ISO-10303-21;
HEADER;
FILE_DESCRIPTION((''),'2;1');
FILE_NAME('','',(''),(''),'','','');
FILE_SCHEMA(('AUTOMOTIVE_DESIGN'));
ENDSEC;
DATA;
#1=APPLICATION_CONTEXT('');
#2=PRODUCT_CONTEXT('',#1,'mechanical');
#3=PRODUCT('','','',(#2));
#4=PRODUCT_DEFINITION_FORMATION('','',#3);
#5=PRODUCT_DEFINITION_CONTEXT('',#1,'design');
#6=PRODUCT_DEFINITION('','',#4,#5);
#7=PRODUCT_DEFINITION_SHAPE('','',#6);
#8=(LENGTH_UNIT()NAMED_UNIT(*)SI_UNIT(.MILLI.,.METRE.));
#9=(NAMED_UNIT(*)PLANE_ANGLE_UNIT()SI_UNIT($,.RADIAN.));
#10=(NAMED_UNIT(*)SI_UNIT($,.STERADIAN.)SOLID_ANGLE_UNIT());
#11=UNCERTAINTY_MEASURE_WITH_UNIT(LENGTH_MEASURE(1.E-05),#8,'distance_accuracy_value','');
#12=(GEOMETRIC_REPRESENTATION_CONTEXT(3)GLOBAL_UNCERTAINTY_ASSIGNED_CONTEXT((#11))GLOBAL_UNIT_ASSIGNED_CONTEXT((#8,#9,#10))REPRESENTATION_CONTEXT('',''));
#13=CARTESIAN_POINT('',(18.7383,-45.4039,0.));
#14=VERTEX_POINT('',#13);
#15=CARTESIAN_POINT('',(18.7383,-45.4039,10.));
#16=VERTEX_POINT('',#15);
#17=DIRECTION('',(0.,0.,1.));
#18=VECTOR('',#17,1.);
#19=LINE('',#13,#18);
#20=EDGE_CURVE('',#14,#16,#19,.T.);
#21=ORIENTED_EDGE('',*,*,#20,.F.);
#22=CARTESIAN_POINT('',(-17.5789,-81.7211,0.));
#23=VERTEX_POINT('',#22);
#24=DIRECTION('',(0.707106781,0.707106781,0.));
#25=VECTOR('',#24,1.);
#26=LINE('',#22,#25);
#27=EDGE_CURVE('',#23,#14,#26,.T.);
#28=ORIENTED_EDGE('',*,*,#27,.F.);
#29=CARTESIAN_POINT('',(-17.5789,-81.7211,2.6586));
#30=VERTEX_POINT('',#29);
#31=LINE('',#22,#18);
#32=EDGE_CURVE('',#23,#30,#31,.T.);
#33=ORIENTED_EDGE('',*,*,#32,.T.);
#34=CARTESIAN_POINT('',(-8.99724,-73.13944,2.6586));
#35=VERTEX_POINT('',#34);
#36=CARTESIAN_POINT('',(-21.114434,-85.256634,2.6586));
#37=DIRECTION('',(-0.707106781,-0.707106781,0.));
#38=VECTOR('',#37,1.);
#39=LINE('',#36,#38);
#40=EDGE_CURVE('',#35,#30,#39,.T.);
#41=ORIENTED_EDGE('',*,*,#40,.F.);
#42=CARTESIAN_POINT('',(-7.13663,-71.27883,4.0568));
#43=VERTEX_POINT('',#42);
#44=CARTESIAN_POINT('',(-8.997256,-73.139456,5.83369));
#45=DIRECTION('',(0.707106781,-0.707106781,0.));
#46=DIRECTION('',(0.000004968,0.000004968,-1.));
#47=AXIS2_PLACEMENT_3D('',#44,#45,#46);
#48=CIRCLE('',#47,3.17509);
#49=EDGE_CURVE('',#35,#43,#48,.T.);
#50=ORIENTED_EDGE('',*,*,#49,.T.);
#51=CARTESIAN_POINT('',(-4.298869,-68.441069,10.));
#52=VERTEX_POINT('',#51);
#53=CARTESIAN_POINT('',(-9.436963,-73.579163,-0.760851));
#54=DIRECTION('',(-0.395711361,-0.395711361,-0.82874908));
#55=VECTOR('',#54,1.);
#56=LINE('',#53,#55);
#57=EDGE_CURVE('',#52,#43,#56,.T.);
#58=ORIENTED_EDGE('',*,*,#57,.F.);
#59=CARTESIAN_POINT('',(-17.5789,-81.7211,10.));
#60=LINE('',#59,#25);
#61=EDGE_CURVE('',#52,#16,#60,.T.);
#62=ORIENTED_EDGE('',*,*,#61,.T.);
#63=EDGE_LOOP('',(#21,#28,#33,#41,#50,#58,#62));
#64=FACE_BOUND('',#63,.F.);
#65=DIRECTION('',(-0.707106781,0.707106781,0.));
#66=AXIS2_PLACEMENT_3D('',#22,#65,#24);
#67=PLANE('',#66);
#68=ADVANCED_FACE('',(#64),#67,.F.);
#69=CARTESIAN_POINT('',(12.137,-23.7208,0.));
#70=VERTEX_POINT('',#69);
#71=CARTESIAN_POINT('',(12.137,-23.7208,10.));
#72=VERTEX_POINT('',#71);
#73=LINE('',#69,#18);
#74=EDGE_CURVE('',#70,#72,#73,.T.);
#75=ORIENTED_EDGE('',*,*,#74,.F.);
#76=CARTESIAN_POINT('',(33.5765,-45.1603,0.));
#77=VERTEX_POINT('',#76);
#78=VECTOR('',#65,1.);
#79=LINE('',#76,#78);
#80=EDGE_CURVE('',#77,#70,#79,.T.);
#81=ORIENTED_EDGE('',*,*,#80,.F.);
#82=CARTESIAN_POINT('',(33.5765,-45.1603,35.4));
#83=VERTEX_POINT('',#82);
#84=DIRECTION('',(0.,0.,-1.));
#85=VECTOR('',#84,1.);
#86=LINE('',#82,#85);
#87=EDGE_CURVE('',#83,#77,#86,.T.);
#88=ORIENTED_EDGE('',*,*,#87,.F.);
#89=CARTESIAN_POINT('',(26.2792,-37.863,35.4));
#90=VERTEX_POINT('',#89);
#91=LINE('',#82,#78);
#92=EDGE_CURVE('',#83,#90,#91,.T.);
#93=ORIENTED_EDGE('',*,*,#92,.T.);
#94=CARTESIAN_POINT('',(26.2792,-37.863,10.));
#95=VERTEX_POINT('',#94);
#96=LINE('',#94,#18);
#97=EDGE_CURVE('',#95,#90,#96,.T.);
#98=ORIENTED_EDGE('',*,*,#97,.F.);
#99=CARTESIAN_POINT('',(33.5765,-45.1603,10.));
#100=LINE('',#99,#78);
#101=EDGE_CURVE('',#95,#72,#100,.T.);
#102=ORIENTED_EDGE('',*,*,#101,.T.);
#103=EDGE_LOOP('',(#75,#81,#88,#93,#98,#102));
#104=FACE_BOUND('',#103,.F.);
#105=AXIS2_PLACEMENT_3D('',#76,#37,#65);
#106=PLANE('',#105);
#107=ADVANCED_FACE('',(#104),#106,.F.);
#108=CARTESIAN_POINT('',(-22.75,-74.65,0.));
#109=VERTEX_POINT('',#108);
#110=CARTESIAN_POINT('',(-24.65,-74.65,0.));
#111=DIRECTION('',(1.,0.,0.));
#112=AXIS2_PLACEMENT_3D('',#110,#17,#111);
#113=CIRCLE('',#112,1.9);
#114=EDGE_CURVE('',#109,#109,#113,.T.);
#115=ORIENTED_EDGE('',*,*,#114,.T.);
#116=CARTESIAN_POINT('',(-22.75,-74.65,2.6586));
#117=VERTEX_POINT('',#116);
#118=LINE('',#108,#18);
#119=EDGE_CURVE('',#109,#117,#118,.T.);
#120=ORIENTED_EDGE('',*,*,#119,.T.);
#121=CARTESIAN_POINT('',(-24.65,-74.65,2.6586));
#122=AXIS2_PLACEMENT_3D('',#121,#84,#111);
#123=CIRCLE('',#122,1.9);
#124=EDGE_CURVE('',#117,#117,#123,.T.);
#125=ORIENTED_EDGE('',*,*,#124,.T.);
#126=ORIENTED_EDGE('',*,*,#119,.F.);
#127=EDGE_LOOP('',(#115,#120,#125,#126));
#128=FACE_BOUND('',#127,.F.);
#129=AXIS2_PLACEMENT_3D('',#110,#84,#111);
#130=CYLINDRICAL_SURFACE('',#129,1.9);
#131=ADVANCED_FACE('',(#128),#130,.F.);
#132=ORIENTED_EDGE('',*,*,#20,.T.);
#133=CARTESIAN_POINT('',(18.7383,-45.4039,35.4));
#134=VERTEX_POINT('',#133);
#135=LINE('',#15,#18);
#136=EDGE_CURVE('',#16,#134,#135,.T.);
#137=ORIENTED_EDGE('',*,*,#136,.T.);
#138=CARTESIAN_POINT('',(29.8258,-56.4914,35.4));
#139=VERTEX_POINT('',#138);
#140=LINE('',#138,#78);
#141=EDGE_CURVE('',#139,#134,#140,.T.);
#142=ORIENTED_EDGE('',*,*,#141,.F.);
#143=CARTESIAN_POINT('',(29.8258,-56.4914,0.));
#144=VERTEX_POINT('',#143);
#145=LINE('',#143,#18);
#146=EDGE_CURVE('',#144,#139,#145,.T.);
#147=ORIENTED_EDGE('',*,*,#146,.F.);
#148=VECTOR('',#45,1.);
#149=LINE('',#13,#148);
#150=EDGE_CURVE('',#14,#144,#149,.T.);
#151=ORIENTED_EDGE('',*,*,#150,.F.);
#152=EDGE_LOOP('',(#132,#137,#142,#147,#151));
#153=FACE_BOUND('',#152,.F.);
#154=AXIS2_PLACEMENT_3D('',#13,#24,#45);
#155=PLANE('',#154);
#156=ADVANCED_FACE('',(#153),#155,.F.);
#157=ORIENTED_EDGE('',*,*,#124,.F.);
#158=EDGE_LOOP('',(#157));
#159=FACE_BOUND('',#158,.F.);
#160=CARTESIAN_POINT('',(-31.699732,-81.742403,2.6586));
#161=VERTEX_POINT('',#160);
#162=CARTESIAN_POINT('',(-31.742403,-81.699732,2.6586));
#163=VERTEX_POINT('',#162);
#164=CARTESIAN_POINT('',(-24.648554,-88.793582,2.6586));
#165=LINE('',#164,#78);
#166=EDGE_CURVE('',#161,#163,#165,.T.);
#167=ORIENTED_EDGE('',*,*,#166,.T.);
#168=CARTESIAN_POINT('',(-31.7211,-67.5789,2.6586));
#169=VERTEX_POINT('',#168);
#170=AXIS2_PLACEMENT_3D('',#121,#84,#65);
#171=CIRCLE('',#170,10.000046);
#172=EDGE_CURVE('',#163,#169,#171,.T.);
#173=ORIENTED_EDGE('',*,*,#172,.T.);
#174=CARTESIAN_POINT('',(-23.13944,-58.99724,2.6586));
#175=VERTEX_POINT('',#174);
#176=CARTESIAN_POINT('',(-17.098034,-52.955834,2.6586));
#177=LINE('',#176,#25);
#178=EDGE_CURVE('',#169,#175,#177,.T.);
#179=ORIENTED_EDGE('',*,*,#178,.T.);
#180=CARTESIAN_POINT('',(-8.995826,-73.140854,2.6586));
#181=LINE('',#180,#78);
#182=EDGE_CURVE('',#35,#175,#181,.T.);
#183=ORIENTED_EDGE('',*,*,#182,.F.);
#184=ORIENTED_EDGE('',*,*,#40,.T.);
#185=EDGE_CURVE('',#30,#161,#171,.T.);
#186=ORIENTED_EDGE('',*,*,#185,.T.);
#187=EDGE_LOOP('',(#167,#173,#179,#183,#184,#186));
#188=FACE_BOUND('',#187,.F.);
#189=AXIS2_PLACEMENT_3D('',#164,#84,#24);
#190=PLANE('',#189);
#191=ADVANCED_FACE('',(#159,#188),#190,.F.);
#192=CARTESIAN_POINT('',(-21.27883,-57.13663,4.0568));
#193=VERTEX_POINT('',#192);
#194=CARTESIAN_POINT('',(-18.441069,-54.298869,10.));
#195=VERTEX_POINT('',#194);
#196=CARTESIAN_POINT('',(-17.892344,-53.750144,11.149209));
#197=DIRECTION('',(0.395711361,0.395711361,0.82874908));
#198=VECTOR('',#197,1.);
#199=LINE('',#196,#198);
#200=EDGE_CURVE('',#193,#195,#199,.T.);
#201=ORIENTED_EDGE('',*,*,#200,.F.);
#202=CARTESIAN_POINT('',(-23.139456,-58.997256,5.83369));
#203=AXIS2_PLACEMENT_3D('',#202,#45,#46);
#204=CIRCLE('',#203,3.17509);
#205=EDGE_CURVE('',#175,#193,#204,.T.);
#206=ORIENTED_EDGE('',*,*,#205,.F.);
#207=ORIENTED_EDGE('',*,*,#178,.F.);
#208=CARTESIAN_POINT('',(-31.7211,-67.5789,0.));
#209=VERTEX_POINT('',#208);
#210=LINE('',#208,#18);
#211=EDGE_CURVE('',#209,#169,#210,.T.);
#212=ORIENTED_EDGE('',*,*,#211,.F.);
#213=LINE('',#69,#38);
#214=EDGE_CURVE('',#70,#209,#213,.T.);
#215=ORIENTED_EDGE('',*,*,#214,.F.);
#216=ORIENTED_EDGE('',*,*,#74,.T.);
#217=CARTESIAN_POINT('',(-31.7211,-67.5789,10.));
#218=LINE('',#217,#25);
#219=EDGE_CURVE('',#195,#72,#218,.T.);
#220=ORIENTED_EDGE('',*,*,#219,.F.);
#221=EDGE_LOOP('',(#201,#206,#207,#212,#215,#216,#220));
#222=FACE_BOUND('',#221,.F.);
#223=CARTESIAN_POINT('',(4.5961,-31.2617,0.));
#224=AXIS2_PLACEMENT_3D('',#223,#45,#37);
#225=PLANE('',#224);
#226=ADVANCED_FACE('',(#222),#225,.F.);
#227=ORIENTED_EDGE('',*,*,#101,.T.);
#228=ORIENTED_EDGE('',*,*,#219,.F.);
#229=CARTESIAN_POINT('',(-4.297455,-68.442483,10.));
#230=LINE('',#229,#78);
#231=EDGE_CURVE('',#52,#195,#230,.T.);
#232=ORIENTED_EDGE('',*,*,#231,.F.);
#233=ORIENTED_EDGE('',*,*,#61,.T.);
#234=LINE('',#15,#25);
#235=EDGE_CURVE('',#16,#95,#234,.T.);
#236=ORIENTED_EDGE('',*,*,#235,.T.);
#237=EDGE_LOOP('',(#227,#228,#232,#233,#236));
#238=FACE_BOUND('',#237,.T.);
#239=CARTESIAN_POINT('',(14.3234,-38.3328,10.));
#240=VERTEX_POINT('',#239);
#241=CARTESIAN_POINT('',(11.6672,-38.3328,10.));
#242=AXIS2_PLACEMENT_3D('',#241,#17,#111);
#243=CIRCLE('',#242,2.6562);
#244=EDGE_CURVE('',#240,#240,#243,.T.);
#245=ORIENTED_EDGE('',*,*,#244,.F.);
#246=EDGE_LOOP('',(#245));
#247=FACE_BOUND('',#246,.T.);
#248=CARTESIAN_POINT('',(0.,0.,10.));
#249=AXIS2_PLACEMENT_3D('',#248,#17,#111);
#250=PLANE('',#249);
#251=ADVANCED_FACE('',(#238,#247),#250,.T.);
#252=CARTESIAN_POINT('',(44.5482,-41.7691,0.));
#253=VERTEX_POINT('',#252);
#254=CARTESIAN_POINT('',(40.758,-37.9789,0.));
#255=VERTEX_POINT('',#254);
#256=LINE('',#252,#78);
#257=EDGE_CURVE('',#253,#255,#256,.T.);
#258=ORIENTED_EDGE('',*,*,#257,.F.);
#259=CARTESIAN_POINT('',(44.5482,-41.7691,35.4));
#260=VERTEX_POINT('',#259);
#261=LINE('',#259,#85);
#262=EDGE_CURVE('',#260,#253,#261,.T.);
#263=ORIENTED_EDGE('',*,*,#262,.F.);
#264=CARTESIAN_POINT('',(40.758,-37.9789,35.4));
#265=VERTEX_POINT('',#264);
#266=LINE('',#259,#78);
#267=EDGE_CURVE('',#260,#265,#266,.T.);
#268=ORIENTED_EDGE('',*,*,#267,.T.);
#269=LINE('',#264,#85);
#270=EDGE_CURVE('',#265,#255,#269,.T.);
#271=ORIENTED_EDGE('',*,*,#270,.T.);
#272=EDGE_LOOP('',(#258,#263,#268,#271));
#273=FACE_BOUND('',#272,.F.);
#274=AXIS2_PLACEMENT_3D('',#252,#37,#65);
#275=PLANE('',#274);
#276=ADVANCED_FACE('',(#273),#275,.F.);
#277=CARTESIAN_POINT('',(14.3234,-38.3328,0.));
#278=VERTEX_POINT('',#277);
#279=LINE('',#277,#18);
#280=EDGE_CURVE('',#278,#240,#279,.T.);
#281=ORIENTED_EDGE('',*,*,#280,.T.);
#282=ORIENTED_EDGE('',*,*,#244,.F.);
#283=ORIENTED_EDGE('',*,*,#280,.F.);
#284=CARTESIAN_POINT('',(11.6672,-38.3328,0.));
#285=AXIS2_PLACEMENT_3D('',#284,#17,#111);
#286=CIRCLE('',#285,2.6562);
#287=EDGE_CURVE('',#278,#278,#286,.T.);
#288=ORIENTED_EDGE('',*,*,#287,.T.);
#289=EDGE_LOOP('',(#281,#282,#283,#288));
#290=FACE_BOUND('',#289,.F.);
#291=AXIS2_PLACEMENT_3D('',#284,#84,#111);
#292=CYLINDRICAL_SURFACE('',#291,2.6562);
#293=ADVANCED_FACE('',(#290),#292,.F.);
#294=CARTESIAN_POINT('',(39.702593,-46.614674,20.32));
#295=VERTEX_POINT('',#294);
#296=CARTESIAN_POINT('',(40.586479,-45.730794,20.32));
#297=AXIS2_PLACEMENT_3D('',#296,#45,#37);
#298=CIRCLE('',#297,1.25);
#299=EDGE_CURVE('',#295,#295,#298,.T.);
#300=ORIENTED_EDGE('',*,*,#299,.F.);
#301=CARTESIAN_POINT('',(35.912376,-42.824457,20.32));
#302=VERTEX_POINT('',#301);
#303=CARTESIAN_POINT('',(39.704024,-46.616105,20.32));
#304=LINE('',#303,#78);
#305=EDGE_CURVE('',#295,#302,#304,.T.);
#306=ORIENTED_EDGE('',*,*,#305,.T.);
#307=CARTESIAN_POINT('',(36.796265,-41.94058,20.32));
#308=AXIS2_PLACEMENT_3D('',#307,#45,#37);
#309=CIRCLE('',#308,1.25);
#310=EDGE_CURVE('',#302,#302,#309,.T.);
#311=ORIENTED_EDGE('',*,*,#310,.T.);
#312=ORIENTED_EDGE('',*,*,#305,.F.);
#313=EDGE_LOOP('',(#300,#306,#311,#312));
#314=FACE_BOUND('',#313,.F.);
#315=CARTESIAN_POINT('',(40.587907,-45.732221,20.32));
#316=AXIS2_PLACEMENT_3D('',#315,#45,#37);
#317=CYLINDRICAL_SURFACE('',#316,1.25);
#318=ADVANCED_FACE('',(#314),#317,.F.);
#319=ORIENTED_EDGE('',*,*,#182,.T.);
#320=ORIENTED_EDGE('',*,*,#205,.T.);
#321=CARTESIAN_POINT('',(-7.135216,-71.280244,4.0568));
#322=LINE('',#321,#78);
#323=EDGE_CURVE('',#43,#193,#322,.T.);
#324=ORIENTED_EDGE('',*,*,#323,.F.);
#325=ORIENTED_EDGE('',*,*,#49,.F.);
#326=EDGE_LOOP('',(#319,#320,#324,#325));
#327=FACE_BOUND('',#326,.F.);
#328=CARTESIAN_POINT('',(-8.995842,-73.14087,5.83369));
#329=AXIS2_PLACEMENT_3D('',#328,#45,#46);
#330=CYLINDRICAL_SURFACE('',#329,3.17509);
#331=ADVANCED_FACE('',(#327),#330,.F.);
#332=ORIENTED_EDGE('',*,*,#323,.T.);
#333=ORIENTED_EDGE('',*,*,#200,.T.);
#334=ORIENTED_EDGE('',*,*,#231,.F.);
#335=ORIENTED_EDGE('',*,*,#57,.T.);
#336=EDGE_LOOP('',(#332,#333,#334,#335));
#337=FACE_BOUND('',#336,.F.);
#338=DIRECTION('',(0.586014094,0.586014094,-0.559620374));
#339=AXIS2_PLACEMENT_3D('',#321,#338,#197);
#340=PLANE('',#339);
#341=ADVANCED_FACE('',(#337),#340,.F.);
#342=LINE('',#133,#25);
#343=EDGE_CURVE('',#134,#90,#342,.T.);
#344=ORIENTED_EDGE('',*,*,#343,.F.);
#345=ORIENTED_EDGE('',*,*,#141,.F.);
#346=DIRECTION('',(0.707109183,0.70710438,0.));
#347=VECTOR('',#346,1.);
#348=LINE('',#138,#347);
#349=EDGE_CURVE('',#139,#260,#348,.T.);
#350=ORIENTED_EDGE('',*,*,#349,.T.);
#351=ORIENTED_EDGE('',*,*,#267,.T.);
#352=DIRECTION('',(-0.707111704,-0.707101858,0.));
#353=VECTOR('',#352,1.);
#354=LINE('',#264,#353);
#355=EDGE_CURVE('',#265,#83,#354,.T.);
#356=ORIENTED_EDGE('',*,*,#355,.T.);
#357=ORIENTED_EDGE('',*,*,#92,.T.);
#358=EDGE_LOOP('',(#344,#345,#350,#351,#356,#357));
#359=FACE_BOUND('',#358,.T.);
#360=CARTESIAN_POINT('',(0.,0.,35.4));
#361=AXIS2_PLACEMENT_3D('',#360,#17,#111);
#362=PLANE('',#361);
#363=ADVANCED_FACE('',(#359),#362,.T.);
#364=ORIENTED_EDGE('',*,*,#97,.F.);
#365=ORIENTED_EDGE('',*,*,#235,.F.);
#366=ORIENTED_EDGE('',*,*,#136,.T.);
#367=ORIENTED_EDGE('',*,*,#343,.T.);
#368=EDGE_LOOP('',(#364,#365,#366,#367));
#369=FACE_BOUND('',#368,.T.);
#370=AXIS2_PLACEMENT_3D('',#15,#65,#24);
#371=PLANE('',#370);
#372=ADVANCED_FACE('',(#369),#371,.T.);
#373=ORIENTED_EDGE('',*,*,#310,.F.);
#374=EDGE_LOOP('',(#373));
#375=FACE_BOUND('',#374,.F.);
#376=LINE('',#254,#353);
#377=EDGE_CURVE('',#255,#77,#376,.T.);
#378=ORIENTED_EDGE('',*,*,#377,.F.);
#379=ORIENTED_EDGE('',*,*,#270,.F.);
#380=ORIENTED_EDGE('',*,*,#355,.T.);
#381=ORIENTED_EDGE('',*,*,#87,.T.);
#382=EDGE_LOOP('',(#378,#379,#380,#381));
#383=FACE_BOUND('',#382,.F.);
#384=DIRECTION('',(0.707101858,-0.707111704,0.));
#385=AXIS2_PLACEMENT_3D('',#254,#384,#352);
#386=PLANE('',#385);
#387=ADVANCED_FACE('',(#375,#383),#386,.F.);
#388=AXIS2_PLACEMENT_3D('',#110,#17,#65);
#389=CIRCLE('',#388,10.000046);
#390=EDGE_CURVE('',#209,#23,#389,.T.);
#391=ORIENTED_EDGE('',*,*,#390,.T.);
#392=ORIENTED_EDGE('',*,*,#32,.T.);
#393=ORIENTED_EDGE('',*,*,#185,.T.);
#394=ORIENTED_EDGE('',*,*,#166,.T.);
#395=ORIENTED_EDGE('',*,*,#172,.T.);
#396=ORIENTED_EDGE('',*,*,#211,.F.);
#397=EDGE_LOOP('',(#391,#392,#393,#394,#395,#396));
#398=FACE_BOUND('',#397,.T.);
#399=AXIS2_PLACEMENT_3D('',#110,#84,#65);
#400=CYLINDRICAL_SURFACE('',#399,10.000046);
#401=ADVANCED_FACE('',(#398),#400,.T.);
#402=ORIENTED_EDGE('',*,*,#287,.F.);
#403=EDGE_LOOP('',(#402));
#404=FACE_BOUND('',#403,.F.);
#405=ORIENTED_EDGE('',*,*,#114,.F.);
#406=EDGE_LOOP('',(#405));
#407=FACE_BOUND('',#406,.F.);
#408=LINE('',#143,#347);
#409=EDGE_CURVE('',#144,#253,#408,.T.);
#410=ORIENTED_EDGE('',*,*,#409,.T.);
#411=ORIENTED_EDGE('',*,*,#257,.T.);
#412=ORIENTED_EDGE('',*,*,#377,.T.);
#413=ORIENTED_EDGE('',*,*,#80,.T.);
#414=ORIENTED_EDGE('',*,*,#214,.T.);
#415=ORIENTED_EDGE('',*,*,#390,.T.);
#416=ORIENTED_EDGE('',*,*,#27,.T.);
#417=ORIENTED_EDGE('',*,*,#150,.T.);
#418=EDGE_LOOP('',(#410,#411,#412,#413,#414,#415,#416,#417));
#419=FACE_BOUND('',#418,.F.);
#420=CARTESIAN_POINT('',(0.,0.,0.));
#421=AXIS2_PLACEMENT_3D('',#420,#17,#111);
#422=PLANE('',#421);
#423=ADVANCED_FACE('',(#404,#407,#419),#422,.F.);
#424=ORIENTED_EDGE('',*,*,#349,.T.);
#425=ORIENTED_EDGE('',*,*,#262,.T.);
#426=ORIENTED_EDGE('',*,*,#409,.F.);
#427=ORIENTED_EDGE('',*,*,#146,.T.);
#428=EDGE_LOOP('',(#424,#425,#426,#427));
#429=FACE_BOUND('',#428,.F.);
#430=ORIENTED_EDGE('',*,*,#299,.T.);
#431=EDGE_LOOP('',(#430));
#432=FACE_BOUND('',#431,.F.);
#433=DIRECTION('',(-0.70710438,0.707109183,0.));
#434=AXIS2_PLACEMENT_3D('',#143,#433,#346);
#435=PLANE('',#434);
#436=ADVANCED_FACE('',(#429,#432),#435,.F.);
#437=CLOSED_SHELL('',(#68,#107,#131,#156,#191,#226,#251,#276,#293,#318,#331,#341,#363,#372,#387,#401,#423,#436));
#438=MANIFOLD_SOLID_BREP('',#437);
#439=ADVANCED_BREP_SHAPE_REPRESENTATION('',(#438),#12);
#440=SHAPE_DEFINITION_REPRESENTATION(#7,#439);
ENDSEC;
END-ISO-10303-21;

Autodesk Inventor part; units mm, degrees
ref_plane "YZ Plane" through (0, 0, 0) normal (1, 0, 0) x (0, 1, 0)
ref_plane "XZ Plane" through (0, 0, 0) normal (0, 1, 0) x (-1, 0, 0)
ref_plane "XY Plane" through (0, 0, 0) normal (0, 0, 1) x (1, 0, 0)
ref_plane "Work Plane1" through (0, 0, 0) normal (0, 0, 1) x (1, 0, 0)
sketch "Sketch1" plane through (0, 0, 0) normal (0, 0, 1) x (1, 0, 0)
  line L0 (-41.9, 57.6) -> (-41.9, 91.9) construction
  line L1 (-41.9, -91.9) -> (41.9, -91.9) construction
  line L2 (-7.4, -59.4) -> (-7.4, -67.3) construction
  circle A0 centre (-24.65, -74.65) radius 17.25 construction
  circle A1 centre (-24.65, -74.65) radius 6.3062 construction
  circle A2 centre (-24.65, -74.65) radius 1.9
  line L3 (-24.65, -74.65) -> (11.6672, -38.3328) construction
  line L4 (-17.5789, -81.7211) -> (18.7383, -45.4039)
  line L5 (4.5961, -31.2617) -> (-31.7211, -67.5789)
  arc A3 (-31.7211, -67.5789) -> (-17.5789, -81.7211) centre (-24.65, -74.65) ccw
  arc A4 (18.7383, -45.4039) -> (4.5961, -31.2617) centre (11.6672, -38.3328) ccw construction
  circle A5 centre (11.6672, -38.3328) radius 2.6562
  line L6 (4.5961, -31.2617) -> (12.137, -23.7208)
  line L7 (3.5996, -14.8432) -> (9.3348, -8.7305) construction
  line L8 (33.237, -42.6502) -> (38.9722, -36.5375) construction
  line L9 (12.137, -23.7208) -> (33.5765, -45.1603) construction
  line L10 (33.5765, -45.1603) -> (12.137, -23.7208)
  line L11 (18.7383, -45.4039) -> (29.8258, -56.4914)
  line L12 (29.8258, -56.4914) -> (44.5482, -41.7691)
  line L13 (44.5482, -41.7691) -> (40.758, -37.9789)
  line L14 (40.758, -37.9789) -> (33.5765, -45.1603)
  point P0 (0, 0)
  point P1 (41.9, -91.9)
  point P2 (-6.4914, -56.4914)
  dimension "d0" = 3.8
  dimension "d3" = 10
  dimension "d4" = 45
  dimension "d5" = 40.64
  dimension "d6" = 20.32
extrude "Extrusion1" add sketch "Sketch1" along normal blind 10
sketch "Sketch2" plane through (0, 0, 10) normal (0, 0, 1) x (1, 0, 0)
  circle A0 centre (-24.65, -74.65) radius 1.9 projected
  circle A1 centre (11.6672, -38.3328) radius 2.6562 projected
  line L0 (-17.5789, -81.7211) -> (18.7383, -45.4039) projected
  line L1 (18.7383, -45.4039) -> (29.8258, -56.4914) projected
  line L2 (29.8258, -56.4914) -> (44.5482, -41.7691) projected
  line L3 (44.5482, -41.7691) -> (40.758, -37.9789) projected
  line L4 (40.758, -37.9789) -> (33.5765, -45.1603) projected
  line L5 (33.5765, -45.1603) -> (12.137, -23.7208) projected
  line L6 (12.137, -23.7208) -> (-31.7211, -67.5789) projected
  arc A2 (-31.7211, -67.5789) -> (-17.5789, -81.7211) centre (-24.65, -74.65) ccw projected
  line L7 (44.5482, -41.7691) -> (40.758, -37.9789) projected
  line L8 (44.5482, -41.7691) -> (40.758, -37.9789)
  line L9 (40.758, -37.9789) -> (26.0356, -52.7012)
  line L10 (26.0356, -52.7012) -> (29.8258, -56.4914)
  line L11 (29.8258, -56.4914) -> (44.5482, -41.7691)
  line L12 (18.7383, -45.4039) -> (29.8258, -56.4914) projected
  line L13 (26.0356, -52.7012) -> (18.7383, -45.4039)
  line L14 (18.7383, -45.4039) -> (26.2792, -37.863)
  line L15 (26.2792, -37.863) -> (33.5765, -45.1603)
  line L16 (33.5765, -45.1603) -> (26.0356, -52.7012)
  point P0 (0, 0)
extrude "Extrusion2" add sketch "Sketch2" along normal blind 25.4 contours L14 L5 L9 L1 | L9 L4 L3 L2 L1
sketch "Sketch3" plane through (44.5482, -41.7691, 35.4) normal (0.7071068, -0.7071068, 0) x (-0.7071068, -0.7071068, 0)
  circle A0 centre (5.6027, 15.08) radius 1.25
  line L0 (20.8205, 35.4) -> (0, 35.4) projected
  point P0 (1.9651, 35.4)
  dimension "d9" = 2.5
  dimension "d10" = 20.32
extrude "Extrusion3" cut sketch "Sketch3" against normal blind 25.4
sketch "Sketch4" plane through (-17.5789, -81.7211, 10) normal (0.7071068, -0.7071068, 0) x (-0.7071068, -0.7071068, 0)
  line L0 (10, 10) -> (10, 0) projected
  line L1 (10, 7.3414) -> (-12.1363, 7.3414)
  line L2 (-14.7676, 5.9432) -> (-18.7808, 0)
  line L3 (0, 0) -> (-51.3603, 0) projected
  arc A0 (-12.1363, 7.3414) -> (-14.7676, 5.9432) centre (-12.1363, 4.1664) ccw
  line L4 (-18.7808, 0) -> (10, 0)
  line L5 (10, 7.3414) -> (10, 0)
  point P0 (-70.2157, 10)
  dimension "d13" = 3.175
extrude "Extrusion4" cut sketch "Sketch4" against normal blind 25.4
properties part number "30_CUBE_openSIM_Laserarm"
